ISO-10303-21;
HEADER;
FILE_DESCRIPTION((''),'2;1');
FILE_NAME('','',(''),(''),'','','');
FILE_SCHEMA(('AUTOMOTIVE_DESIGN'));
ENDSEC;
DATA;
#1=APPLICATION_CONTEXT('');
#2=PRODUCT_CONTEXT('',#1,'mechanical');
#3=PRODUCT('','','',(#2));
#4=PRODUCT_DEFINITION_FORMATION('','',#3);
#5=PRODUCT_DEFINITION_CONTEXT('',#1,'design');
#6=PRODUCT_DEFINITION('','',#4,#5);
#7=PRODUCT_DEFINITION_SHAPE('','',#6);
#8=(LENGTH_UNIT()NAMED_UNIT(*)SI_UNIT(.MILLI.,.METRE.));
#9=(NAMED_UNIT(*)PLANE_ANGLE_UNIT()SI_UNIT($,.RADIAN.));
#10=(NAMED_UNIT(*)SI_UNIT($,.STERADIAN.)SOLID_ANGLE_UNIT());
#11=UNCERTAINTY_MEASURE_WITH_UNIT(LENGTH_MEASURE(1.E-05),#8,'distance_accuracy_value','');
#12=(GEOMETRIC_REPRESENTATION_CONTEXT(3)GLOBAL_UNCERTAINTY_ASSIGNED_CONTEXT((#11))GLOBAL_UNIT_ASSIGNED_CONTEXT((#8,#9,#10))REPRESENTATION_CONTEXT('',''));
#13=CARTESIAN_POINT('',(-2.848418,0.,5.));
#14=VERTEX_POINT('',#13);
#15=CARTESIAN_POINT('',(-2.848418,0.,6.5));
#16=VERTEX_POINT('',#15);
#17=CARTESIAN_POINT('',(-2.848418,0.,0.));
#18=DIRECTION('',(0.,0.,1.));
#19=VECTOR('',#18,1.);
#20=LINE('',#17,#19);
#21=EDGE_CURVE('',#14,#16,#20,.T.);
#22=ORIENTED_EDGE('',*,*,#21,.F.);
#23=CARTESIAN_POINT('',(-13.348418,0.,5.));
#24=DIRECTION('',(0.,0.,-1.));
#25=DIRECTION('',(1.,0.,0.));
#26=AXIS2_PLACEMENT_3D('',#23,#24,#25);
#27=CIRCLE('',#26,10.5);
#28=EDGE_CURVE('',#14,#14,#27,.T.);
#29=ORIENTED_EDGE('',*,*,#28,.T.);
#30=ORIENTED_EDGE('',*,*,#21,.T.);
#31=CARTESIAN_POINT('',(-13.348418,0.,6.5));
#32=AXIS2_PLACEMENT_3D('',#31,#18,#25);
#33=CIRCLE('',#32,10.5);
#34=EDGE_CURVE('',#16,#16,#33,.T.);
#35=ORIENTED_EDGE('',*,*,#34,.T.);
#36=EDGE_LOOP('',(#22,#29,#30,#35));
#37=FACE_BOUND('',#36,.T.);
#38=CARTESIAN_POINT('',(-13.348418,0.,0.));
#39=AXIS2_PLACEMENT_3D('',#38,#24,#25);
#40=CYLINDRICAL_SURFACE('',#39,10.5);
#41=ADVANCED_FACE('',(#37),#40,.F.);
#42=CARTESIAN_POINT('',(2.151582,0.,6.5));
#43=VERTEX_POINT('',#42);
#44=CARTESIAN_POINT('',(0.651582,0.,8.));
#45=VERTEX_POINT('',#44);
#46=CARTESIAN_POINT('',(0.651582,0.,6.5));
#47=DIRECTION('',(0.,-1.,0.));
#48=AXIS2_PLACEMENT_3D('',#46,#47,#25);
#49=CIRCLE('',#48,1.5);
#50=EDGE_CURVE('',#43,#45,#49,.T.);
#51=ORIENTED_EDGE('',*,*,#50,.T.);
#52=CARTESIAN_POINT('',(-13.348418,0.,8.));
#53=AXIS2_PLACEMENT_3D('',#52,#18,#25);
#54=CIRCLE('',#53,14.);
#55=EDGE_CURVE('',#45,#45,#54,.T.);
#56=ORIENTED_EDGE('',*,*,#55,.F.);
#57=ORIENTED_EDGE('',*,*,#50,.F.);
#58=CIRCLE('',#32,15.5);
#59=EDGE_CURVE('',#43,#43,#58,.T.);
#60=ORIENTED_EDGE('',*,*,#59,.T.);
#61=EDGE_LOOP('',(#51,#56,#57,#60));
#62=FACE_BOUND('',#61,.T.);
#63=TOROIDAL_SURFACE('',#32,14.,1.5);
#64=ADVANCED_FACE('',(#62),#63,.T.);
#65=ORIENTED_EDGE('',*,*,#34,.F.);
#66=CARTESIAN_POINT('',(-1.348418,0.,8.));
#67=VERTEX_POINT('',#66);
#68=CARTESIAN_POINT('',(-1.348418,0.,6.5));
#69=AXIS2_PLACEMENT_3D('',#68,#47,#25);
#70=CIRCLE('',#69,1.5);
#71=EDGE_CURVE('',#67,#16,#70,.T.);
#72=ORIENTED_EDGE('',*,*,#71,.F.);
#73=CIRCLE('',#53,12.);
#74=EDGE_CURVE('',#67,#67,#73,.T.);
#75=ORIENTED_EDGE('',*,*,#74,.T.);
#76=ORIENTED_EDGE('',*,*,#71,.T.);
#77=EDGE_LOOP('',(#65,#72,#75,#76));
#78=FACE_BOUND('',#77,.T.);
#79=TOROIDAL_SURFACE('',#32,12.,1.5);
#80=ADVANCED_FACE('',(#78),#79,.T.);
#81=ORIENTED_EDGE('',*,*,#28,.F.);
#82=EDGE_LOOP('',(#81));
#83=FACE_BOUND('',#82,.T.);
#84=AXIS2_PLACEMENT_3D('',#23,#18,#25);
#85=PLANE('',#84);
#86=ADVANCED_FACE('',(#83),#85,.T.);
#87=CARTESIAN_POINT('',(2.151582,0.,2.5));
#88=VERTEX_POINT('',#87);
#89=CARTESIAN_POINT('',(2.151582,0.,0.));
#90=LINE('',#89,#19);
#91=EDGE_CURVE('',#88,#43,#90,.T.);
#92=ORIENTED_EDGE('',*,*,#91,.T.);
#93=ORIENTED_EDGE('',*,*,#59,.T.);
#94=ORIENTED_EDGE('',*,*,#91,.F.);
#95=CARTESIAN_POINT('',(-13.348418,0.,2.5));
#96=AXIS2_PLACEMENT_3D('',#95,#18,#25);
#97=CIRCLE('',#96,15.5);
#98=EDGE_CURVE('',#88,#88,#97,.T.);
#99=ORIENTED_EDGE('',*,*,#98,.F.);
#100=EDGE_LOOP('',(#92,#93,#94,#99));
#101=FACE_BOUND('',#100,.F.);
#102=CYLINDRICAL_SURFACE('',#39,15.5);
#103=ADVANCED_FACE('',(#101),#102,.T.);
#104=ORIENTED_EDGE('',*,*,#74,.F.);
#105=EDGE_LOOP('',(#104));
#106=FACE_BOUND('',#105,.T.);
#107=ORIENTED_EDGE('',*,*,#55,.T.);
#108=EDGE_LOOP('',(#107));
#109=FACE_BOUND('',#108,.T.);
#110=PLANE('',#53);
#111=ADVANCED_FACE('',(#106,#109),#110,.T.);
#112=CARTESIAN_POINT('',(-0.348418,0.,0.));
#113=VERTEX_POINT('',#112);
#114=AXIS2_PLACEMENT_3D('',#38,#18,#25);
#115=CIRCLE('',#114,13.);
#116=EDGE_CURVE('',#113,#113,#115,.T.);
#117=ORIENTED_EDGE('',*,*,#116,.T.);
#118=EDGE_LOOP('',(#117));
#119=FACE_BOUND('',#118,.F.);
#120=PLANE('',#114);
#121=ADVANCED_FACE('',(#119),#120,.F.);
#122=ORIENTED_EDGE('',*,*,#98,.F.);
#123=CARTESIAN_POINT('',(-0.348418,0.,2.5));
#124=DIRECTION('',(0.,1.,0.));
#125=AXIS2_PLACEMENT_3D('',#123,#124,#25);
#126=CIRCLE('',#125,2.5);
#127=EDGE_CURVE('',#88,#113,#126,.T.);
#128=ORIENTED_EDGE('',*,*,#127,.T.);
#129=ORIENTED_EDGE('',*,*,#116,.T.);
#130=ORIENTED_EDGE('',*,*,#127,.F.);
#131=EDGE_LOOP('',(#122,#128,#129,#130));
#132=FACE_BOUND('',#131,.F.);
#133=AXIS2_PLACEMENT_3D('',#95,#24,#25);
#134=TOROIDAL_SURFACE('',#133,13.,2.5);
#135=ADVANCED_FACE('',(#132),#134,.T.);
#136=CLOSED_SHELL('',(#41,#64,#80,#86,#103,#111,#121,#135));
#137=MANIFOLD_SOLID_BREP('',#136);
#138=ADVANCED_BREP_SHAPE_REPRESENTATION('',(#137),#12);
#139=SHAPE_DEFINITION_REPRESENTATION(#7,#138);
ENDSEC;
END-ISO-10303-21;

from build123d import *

# Parameters (mm, degrees)
F0_R     = 15.5
F1_DEPTH = 8
F2_T     = -5
F3_R     = 1.5
F4_R     = 2.5


with BuildPart() as f1:
    # F0 (on Top) → F1 (new body)
    with BuildSketch(Plane.XY):
        with Locations((-13.3484182879, 0)):
            Circle(F0_R)
    extrude(amount=F1_DEPTH)

    # F2
    f2_openings = [f1.faces().sort_by_distance(p)[0] for p in [
        (-13.348418, 0, 8),
    ]]
    offset(amount=F2_T, openings=f2_openings)

    # F3
    f3_edges = [f1.edges().sort_by_distance(p)[0] for p in [
        (-28.848418, 0, 8),
        (-23.848418, 0, 8),
    ]]
    fillet(f3_edges, radius=F3_R)

    # F4
    f4_edges = [f1.edges().sort_by_distance(p)[0] for p in [
        (-28.848418, 0, 0),
    ]]
    fillet(f4_edges, radius=F4_R)


solid = f1.part
